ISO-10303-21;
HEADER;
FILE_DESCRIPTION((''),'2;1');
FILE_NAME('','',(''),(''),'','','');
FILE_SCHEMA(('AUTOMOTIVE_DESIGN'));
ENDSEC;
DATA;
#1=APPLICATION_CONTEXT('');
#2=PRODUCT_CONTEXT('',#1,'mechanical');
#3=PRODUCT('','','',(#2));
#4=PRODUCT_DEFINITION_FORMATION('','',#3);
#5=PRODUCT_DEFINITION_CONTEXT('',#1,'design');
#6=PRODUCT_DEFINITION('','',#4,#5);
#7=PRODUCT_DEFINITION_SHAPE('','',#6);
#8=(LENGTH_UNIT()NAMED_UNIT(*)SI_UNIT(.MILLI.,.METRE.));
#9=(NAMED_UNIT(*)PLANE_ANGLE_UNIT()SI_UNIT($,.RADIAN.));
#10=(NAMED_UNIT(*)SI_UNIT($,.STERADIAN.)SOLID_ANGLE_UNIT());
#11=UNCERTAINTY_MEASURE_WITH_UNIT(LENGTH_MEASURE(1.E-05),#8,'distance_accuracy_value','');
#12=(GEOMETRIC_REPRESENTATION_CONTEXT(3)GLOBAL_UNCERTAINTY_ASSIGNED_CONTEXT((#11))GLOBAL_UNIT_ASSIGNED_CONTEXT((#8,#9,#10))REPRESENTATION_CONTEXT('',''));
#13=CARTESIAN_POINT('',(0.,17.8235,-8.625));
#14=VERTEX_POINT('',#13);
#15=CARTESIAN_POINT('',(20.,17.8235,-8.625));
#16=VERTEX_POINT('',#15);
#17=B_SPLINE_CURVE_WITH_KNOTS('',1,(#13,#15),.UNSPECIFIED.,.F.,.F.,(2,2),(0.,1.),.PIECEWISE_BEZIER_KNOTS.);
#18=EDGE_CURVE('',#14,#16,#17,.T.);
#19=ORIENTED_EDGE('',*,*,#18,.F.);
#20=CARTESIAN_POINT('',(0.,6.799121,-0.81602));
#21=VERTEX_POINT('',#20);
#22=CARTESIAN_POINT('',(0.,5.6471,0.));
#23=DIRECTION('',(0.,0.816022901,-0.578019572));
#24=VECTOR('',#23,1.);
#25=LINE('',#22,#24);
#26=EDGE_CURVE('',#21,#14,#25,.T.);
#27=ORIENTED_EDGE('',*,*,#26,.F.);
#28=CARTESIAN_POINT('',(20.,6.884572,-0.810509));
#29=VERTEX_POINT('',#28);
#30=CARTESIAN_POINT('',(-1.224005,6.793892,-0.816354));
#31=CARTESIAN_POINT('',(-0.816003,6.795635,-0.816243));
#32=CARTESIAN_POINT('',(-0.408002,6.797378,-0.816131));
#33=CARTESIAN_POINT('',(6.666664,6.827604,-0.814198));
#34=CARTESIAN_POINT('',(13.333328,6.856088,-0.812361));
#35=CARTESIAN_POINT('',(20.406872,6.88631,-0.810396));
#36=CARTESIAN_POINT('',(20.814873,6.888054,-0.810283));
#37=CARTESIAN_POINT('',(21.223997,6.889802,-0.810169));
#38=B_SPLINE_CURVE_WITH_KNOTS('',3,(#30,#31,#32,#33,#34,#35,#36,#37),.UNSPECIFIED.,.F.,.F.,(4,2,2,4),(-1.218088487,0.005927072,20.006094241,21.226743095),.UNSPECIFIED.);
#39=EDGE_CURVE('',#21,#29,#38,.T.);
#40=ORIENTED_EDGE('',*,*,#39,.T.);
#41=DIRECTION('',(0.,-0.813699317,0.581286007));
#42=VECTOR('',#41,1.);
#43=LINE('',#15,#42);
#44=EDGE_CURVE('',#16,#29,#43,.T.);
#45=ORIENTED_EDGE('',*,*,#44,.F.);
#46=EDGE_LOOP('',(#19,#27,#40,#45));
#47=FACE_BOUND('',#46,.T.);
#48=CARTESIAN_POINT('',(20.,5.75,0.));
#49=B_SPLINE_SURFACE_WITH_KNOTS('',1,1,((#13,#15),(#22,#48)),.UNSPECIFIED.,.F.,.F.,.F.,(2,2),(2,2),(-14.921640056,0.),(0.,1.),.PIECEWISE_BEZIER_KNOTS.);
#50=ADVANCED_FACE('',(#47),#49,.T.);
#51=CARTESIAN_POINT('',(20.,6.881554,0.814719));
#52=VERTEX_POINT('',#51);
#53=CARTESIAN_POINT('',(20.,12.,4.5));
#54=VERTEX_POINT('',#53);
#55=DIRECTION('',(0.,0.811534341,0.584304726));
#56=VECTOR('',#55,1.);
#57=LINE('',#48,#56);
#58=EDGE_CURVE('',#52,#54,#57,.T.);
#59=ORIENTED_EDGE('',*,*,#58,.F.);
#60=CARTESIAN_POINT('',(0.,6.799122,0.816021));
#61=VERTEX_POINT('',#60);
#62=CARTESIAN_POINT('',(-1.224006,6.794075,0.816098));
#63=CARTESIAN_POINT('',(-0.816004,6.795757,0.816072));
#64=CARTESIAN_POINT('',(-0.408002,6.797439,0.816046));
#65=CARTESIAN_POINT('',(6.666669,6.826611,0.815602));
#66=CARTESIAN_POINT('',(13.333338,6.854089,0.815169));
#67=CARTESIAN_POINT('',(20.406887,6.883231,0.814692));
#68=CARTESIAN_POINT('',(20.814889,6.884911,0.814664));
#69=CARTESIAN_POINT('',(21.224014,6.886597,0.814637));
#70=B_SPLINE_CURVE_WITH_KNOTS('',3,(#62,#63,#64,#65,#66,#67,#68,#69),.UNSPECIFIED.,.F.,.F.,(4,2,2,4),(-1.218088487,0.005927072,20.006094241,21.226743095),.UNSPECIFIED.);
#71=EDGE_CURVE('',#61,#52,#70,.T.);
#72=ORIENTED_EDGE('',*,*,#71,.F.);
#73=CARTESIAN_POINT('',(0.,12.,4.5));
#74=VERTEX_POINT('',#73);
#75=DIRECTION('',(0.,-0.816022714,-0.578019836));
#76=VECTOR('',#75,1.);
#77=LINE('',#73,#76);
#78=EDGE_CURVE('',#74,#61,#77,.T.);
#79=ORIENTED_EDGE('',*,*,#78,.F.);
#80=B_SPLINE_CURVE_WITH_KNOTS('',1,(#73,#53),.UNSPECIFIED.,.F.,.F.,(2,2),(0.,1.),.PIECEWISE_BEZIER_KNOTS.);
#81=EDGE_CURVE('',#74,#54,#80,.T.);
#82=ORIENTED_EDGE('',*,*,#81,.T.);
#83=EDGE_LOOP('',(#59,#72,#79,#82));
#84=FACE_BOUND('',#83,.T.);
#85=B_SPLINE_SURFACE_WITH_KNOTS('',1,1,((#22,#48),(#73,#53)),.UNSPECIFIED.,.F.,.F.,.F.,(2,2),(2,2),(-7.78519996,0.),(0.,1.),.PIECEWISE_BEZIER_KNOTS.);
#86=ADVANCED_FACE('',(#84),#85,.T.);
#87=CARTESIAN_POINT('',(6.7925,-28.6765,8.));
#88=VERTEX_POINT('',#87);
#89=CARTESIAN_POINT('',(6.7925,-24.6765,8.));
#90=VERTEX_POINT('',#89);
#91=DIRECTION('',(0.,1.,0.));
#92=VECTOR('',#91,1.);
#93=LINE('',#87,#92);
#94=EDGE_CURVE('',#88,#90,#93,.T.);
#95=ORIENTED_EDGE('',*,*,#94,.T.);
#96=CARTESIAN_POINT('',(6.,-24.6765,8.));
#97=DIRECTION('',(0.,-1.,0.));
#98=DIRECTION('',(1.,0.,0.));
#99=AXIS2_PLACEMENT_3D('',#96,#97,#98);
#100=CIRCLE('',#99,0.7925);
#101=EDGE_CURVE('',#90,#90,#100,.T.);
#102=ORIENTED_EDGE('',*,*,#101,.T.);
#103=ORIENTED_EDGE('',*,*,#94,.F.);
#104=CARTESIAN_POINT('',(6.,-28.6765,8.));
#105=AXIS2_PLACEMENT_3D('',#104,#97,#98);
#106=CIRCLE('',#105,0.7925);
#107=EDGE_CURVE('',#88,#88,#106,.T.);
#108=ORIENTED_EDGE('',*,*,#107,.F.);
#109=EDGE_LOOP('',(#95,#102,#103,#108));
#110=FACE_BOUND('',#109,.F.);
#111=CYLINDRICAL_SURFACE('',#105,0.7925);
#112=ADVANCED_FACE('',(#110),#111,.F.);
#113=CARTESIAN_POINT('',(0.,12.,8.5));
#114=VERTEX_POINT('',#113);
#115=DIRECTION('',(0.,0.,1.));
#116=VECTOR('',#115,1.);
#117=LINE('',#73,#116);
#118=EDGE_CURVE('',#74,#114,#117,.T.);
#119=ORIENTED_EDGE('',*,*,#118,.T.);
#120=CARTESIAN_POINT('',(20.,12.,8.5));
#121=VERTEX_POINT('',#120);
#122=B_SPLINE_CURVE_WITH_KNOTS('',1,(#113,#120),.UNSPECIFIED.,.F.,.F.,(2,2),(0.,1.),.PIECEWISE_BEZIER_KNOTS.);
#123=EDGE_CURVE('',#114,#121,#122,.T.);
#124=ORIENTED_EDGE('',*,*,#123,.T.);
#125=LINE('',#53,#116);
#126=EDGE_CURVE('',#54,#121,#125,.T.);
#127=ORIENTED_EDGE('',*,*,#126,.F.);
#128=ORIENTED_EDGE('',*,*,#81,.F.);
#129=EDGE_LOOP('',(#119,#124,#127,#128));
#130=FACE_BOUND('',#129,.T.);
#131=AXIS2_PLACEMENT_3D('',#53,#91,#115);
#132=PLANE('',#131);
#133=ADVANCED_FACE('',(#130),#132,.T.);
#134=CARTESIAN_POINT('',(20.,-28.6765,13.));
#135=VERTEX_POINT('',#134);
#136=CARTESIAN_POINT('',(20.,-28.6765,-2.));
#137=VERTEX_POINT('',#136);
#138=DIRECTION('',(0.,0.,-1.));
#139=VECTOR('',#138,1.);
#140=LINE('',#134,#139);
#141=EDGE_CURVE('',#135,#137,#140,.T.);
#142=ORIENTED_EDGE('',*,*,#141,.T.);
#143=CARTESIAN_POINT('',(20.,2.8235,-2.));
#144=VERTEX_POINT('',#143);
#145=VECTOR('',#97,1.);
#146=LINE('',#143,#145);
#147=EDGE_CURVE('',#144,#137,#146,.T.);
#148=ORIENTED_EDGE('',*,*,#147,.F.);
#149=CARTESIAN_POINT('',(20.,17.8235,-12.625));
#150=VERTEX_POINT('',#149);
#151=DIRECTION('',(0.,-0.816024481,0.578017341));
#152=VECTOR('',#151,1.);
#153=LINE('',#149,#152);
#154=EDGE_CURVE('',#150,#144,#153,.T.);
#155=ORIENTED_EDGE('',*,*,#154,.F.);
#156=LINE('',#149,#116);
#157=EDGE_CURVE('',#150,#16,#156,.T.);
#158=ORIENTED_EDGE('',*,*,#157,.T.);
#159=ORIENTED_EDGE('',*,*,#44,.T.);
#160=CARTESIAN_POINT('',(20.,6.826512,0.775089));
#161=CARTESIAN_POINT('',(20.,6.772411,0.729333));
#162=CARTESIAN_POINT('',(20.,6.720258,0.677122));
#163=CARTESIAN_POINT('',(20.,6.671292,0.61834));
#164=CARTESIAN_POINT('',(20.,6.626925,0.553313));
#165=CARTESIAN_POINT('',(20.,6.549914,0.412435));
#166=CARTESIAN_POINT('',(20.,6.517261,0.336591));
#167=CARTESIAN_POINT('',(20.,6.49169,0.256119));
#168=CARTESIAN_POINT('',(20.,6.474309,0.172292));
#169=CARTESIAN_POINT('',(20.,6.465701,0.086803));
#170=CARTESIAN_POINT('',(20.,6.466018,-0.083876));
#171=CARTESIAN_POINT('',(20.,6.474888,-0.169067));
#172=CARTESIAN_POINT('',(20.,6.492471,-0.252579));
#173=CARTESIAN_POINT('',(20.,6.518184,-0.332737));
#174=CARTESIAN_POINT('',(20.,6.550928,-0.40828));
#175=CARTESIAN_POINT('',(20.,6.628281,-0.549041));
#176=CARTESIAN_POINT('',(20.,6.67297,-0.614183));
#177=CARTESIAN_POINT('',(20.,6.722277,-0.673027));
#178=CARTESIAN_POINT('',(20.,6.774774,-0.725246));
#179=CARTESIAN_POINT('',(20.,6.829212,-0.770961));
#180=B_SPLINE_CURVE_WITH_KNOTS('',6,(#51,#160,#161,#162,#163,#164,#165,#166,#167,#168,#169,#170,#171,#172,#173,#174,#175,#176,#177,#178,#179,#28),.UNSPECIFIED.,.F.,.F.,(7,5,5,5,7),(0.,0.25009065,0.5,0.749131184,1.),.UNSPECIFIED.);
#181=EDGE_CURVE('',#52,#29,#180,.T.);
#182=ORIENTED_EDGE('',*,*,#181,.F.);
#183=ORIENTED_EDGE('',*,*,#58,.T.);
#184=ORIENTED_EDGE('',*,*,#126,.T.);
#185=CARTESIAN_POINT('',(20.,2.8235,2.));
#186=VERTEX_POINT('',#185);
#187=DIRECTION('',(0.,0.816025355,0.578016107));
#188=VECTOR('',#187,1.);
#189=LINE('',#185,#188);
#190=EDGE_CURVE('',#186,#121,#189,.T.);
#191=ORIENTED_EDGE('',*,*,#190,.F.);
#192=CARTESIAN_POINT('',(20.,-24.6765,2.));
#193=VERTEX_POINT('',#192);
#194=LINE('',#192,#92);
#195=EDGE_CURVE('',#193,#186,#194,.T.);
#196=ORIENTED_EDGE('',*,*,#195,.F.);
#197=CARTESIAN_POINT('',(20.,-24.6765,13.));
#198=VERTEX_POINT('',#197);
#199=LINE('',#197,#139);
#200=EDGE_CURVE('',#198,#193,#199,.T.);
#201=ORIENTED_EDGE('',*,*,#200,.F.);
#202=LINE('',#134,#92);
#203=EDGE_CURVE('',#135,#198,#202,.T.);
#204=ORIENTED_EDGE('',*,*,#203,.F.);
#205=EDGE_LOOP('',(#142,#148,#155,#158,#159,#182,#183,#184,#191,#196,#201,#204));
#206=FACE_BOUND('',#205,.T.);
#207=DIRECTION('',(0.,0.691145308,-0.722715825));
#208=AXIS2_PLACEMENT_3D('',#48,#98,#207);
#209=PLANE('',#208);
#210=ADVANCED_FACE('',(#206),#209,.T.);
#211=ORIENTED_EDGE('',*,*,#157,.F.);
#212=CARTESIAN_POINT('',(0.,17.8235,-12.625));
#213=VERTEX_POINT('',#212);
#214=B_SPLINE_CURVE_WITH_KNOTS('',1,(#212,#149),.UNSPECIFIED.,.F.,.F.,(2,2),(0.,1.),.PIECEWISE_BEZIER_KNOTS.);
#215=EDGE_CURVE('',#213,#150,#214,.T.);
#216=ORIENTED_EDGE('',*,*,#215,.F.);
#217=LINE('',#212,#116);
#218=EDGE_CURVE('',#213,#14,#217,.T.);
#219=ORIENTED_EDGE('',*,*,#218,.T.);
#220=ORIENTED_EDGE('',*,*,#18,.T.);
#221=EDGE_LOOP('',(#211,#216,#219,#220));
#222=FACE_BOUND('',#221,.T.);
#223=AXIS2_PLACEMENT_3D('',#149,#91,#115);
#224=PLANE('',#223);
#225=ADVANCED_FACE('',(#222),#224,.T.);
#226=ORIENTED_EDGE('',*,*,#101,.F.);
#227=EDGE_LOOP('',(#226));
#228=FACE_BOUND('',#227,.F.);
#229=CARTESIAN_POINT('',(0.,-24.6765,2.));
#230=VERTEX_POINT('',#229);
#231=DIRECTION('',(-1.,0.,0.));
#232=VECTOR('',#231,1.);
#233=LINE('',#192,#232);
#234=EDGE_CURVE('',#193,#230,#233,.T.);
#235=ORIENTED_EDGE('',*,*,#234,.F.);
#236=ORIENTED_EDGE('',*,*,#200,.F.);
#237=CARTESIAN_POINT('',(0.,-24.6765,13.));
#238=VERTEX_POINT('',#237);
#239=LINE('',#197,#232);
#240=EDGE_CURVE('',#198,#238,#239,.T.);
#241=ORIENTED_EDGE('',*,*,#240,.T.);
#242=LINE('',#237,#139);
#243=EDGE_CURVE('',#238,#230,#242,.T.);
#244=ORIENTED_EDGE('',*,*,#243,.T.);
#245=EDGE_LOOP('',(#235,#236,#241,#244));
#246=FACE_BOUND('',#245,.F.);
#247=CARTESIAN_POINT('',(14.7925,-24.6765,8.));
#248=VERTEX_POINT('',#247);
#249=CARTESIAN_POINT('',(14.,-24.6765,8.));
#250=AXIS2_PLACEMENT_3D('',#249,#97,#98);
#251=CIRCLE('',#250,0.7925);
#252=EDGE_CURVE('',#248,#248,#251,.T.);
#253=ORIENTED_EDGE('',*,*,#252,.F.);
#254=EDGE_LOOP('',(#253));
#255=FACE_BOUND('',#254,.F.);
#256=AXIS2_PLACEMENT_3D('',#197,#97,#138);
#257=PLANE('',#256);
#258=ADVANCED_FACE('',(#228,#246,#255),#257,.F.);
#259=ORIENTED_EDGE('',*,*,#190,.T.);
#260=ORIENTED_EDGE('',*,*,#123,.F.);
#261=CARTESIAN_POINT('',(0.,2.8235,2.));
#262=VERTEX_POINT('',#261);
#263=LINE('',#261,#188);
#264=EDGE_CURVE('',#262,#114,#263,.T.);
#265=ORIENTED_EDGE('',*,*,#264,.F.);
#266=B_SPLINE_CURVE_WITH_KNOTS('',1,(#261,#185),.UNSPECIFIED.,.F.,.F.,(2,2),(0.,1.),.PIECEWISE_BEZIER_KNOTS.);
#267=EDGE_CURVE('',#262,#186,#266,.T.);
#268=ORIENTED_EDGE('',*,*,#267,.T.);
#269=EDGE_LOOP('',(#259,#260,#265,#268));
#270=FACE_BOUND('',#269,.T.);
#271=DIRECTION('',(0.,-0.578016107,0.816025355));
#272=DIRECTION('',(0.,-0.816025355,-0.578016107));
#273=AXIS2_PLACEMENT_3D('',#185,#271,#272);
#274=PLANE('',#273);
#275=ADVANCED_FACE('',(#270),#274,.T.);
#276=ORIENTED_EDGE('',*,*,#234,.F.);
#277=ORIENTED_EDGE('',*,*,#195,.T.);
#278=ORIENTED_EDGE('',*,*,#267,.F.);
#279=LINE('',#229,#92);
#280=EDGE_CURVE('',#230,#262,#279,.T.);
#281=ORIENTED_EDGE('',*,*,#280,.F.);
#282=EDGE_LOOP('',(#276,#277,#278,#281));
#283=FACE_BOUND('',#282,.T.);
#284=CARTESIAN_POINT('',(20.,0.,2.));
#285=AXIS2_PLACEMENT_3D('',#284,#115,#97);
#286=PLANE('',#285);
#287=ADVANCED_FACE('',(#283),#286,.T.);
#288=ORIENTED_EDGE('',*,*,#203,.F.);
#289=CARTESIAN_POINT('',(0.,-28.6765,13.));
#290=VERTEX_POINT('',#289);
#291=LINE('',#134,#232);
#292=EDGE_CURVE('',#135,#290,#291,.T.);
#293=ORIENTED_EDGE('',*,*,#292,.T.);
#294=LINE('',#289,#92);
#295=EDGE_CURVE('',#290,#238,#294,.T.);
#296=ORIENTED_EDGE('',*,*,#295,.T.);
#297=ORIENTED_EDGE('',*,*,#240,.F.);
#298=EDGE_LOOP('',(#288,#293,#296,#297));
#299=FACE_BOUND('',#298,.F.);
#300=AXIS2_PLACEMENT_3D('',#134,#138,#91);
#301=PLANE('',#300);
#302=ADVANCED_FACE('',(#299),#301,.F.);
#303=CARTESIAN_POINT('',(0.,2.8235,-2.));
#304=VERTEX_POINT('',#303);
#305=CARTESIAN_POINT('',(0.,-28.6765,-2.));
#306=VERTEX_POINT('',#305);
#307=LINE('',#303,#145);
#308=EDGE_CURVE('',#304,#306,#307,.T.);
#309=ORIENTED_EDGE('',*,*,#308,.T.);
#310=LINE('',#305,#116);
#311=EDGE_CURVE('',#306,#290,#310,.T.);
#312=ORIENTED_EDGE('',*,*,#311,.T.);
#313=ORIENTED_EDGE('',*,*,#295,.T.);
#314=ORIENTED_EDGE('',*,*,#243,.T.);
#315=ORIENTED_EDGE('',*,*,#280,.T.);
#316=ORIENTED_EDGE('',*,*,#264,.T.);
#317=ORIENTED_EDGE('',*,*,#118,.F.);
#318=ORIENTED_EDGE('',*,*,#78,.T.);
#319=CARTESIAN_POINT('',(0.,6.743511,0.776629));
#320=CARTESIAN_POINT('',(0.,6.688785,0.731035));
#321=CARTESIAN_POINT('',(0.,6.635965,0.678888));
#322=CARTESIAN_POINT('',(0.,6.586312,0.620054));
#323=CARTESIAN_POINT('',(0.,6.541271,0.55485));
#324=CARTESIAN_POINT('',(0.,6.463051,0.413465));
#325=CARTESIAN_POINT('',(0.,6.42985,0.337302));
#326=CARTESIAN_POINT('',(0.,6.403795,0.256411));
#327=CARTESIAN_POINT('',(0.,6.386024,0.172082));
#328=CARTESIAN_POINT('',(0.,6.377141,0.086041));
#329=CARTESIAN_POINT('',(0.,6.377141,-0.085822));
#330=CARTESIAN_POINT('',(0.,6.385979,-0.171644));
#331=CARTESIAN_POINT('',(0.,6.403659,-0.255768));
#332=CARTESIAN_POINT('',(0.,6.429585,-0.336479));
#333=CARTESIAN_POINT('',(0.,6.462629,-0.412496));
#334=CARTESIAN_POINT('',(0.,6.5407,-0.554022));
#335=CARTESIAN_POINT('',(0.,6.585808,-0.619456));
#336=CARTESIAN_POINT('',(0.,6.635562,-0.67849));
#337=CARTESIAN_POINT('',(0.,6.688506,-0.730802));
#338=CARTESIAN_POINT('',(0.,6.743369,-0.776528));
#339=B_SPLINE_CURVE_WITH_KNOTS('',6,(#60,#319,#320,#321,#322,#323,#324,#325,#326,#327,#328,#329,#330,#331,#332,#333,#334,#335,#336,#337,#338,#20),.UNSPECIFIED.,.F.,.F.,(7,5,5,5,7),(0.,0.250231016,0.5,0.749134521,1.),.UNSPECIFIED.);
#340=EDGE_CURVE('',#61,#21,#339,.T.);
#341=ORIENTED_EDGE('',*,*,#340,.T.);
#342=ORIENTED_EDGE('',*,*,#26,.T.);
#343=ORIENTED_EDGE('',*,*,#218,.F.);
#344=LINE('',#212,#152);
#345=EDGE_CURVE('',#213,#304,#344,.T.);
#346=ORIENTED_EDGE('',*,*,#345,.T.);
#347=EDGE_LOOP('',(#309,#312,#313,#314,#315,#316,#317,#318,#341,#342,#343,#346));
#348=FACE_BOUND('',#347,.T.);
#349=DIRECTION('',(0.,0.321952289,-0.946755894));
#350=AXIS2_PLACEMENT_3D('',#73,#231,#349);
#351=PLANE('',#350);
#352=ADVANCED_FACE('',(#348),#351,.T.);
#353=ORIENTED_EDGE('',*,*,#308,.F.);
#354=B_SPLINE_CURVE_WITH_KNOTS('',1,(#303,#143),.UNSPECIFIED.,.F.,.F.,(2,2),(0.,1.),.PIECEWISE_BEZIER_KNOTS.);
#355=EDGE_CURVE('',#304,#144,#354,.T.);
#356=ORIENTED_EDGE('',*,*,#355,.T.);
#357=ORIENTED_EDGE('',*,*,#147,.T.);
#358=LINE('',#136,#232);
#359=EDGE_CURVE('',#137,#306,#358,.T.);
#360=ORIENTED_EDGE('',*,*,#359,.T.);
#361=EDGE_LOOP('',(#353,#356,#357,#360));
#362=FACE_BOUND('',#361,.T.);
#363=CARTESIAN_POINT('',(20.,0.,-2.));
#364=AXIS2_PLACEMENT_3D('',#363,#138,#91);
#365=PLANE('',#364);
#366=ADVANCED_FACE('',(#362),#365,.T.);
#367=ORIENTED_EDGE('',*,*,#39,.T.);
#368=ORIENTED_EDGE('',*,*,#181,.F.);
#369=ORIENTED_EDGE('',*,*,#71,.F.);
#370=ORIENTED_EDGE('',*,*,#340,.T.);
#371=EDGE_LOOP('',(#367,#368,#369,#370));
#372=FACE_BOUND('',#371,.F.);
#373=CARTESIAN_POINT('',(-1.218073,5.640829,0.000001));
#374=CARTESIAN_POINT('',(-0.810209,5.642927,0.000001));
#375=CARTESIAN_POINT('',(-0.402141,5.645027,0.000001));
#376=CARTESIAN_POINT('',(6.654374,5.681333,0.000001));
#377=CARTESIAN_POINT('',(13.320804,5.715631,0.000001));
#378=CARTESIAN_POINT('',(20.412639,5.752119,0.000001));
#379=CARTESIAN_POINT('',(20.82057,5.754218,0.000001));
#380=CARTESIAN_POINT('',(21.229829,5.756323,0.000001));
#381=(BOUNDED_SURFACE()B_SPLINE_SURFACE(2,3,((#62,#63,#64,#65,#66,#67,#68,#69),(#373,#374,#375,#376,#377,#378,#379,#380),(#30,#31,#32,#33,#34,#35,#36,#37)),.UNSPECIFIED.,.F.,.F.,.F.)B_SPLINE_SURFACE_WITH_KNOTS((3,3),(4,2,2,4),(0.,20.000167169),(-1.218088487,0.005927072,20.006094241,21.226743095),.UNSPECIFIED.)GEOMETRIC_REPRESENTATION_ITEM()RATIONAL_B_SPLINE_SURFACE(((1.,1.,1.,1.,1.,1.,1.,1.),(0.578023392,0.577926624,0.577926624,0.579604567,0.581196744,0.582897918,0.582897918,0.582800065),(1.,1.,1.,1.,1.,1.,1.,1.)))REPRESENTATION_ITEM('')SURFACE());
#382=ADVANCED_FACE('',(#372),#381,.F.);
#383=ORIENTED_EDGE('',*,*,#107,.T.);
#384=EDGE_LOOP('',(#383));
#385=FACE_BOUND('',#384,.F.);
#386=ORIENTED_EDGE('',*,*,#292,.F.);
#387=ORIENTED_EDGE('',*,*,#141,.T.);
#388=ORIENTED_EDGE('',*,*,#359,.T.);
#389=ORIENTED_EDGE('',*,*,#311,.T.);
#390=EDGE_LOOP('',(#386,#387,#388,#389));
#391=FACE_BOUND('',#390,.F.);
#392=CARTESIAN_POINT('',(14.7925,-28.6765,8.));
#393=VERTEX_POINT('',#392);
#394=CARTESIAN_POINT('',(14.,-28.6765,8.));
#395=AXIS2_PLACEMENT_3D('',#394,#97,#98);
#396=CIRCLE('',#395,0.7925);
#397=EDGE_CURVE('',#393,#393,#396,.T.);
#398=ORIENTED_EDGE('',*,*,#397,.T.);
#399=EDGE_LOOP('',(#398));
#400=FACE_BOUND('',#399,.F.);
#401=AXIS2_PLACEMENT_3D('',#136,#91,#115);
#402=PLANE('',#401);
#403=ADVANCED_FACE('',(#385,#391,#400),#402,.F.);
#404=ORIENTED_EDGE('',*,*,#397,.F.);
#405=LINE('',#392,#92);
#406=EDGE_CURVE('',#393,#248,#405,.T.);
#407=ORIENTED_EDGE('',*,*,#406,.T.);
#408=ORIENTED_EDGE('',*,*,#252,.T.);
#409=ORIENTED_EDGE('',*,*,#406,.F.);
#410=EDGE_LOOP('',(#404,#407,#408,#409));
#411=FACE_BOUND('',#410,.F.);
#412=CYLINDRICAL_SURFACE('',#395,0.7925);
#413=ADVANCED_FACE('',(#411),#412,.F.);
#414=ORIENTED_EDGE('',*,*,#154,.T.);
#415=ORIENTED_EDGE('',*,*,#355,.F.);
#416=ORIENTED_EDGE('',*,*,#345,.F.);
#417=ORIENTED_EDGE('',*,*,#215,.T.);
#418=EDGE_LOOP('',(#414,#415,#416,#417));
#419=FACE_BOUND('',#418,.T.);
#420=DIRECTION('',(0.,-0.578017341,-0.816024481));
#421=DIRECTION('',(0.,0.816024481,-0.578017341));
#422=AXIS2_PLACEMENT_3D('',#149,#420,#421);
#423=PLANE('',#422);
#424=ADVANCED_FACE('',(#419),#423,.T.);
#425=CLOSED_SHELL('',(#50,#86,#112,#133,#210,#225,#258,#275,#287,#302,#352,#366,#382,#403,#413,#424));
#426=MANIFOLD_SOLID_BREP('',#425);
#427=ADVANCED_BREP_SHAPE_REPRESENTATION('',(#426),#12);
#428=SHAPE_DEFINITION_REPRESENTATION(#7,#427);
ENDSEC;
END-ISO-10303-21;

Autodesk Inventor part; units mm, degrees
ref_plane "XZ Plane" through (0, 0, 0) normal (0, 1, 0) x (-1, 0, 0)
ref_plane "XY Plane" through (0, 0, 0) normal (0, 0, 1) x (1, 0, 0)
sketch "Sketch1" plane through (0, 0, 0) normal (1, 0, 0) x (0, 1, 0)
  line L0 (12, 4.5) -> (12, 8.5)
  line L1 (2.8235, 2) -> (12, 8.5)
  line L2 (17.8235, -12.625) -> (2.8235, -2)
  line L3 (0, 0) -> (0, 2)
  line L4 (0, 2) -> (2.8235, 2)
  line L5 (0, 0) -> (0, -2)
  line L6 (0, -2) -> (2.8235, -2)
  line L7 (12, 4.5) -> (5.6471, 0)
  line L8 (17.8235, -12.625) -> (17.8235, -8.625)
  line L9 (5.6471, 0) -> (17.8235, -8.625)
  dimension "d7" = 12
  dimension "d9" = 2
  dimension "d10" = 2
  dimension "d12" = 4
  dimension "d26" = 9.1765
  dimension "d27" = 6.3529
  dimension "d53" = 70.622
  dimension "d55" = 144.689
  dimension "d56" = 15
ref_plane "Work Plane1" through (20, 0, 0) normal (1, 0, 0) x (0, 1, 0)
sketch "Sketch2" plane through (20, 0, 0) normal (1, 0, 0) x (0, 1, 0)
  line L0 (12, 4.5) -> (12, 8.5) projected
  line L1 (12, 4.5) -> (5.6471, 0) projected
  line L2 (2.8235, 2) -> (12, 8.5) projected
  line L3 (17.8235, -12.625) -> (2.8235, -2) projected
  line L4 (0, 2) -> (2.8235, 2) projected
  line L5 (0, 0) -> (0, 2) projected
  line L6 (0, 0) -> (0, -2) projected
  line L7 (0, -2) -> (2.8235, -2) projected
  line L8 (5.75, 0) -> (12, 4.5)
  line L9 (17.8235, -12.625) -> (2.8235, -2)
  line L10 (0, -2) -> (2.8235, -2)
  line L11 (0, -2) -> (0, 2)
  line L12 (0, 2) -> (2.8235, 2)
  line L13 (2.8235, 2) -> (12, 8.5)
  line L14 (12, 8.5) -> (12, 4.5)
  line L15 (17.8235, -12.625) -> (17.8235, -8.625)
  line L16 (17.8235, -8.625) -> (5.75, 0)
  dimension "d19" = 0.1029
  dimension "d57" = 4
  dimension "d58" = 71.295
loft "Loft1" add profiles "Sketch1", "Sketch2"
fillet "Fillet1" radius 1 1 edges at (10, 5.6985, 0)
sketch "Sketch3" plane through (20, 0, -2) normal (1, 0, 0) x (0, 0, -1)
  line L0 (-4, 2.8235) -> (-10.5, 12) projected
  line L1 (-4, 2.8235) -> (0, 2.8235)
  line L2 (0, 2.8235) -> (0, -28.6765)
  line L3 (0, -28.6765) -> (-4, -28.6765)
  line L4 (-4, -24.6765) -> (-4, 2.8235)
  line L5 (0, -28.6765) -> (-15, -28.6765)
  line L6 (-15, -28.6765) -> (-15, -24.6765)
  line L7 (-15, -24.6765) -> (-4, -24.6765)
  line L8 (0, -24.6765) -> (0, -28.6765)
  point P0 (-2, 0)
  dimension "d35" = 31.5
  dimension "d36" = 4
  dimension "d37" = 15
  dimension "d38" = 4
  dimension "d39" = 11
extrude "Extrusion2" add sketch "Sketch3" against normal up to surface (20 mm away)
sketch "Sketch4" plane through (20, -28.6765, -2) normal (0, -1, 0) x (1, 0, 0)
  line L0 (0, 15) -> (-20, 15) projected
  line L1 (-20, 0) -> (-20, 15) projected
  line L2 (0, 0) -> (0, 15) projected
  circle A0 centre (-14, 10) radius 0.7925
  circle A1 centre (-6, 10) radius 0.7925
  point P0 (-20, 2)
  dimension "d44" = 5
  dimension "d45" = 6
  dimension "d46" = 6
  dimension "d48" = 5
  dimension "d49" = 1.585
  dimension "d50" = 1.585
extrude "Extrusion3" cut sketch "Sketch4" against normal blind 10
equation "\"d19\" = d15"
equation "\"d50\" = d49"
equation "\"d15\" = 0.102953"
properties part number "stopper"
